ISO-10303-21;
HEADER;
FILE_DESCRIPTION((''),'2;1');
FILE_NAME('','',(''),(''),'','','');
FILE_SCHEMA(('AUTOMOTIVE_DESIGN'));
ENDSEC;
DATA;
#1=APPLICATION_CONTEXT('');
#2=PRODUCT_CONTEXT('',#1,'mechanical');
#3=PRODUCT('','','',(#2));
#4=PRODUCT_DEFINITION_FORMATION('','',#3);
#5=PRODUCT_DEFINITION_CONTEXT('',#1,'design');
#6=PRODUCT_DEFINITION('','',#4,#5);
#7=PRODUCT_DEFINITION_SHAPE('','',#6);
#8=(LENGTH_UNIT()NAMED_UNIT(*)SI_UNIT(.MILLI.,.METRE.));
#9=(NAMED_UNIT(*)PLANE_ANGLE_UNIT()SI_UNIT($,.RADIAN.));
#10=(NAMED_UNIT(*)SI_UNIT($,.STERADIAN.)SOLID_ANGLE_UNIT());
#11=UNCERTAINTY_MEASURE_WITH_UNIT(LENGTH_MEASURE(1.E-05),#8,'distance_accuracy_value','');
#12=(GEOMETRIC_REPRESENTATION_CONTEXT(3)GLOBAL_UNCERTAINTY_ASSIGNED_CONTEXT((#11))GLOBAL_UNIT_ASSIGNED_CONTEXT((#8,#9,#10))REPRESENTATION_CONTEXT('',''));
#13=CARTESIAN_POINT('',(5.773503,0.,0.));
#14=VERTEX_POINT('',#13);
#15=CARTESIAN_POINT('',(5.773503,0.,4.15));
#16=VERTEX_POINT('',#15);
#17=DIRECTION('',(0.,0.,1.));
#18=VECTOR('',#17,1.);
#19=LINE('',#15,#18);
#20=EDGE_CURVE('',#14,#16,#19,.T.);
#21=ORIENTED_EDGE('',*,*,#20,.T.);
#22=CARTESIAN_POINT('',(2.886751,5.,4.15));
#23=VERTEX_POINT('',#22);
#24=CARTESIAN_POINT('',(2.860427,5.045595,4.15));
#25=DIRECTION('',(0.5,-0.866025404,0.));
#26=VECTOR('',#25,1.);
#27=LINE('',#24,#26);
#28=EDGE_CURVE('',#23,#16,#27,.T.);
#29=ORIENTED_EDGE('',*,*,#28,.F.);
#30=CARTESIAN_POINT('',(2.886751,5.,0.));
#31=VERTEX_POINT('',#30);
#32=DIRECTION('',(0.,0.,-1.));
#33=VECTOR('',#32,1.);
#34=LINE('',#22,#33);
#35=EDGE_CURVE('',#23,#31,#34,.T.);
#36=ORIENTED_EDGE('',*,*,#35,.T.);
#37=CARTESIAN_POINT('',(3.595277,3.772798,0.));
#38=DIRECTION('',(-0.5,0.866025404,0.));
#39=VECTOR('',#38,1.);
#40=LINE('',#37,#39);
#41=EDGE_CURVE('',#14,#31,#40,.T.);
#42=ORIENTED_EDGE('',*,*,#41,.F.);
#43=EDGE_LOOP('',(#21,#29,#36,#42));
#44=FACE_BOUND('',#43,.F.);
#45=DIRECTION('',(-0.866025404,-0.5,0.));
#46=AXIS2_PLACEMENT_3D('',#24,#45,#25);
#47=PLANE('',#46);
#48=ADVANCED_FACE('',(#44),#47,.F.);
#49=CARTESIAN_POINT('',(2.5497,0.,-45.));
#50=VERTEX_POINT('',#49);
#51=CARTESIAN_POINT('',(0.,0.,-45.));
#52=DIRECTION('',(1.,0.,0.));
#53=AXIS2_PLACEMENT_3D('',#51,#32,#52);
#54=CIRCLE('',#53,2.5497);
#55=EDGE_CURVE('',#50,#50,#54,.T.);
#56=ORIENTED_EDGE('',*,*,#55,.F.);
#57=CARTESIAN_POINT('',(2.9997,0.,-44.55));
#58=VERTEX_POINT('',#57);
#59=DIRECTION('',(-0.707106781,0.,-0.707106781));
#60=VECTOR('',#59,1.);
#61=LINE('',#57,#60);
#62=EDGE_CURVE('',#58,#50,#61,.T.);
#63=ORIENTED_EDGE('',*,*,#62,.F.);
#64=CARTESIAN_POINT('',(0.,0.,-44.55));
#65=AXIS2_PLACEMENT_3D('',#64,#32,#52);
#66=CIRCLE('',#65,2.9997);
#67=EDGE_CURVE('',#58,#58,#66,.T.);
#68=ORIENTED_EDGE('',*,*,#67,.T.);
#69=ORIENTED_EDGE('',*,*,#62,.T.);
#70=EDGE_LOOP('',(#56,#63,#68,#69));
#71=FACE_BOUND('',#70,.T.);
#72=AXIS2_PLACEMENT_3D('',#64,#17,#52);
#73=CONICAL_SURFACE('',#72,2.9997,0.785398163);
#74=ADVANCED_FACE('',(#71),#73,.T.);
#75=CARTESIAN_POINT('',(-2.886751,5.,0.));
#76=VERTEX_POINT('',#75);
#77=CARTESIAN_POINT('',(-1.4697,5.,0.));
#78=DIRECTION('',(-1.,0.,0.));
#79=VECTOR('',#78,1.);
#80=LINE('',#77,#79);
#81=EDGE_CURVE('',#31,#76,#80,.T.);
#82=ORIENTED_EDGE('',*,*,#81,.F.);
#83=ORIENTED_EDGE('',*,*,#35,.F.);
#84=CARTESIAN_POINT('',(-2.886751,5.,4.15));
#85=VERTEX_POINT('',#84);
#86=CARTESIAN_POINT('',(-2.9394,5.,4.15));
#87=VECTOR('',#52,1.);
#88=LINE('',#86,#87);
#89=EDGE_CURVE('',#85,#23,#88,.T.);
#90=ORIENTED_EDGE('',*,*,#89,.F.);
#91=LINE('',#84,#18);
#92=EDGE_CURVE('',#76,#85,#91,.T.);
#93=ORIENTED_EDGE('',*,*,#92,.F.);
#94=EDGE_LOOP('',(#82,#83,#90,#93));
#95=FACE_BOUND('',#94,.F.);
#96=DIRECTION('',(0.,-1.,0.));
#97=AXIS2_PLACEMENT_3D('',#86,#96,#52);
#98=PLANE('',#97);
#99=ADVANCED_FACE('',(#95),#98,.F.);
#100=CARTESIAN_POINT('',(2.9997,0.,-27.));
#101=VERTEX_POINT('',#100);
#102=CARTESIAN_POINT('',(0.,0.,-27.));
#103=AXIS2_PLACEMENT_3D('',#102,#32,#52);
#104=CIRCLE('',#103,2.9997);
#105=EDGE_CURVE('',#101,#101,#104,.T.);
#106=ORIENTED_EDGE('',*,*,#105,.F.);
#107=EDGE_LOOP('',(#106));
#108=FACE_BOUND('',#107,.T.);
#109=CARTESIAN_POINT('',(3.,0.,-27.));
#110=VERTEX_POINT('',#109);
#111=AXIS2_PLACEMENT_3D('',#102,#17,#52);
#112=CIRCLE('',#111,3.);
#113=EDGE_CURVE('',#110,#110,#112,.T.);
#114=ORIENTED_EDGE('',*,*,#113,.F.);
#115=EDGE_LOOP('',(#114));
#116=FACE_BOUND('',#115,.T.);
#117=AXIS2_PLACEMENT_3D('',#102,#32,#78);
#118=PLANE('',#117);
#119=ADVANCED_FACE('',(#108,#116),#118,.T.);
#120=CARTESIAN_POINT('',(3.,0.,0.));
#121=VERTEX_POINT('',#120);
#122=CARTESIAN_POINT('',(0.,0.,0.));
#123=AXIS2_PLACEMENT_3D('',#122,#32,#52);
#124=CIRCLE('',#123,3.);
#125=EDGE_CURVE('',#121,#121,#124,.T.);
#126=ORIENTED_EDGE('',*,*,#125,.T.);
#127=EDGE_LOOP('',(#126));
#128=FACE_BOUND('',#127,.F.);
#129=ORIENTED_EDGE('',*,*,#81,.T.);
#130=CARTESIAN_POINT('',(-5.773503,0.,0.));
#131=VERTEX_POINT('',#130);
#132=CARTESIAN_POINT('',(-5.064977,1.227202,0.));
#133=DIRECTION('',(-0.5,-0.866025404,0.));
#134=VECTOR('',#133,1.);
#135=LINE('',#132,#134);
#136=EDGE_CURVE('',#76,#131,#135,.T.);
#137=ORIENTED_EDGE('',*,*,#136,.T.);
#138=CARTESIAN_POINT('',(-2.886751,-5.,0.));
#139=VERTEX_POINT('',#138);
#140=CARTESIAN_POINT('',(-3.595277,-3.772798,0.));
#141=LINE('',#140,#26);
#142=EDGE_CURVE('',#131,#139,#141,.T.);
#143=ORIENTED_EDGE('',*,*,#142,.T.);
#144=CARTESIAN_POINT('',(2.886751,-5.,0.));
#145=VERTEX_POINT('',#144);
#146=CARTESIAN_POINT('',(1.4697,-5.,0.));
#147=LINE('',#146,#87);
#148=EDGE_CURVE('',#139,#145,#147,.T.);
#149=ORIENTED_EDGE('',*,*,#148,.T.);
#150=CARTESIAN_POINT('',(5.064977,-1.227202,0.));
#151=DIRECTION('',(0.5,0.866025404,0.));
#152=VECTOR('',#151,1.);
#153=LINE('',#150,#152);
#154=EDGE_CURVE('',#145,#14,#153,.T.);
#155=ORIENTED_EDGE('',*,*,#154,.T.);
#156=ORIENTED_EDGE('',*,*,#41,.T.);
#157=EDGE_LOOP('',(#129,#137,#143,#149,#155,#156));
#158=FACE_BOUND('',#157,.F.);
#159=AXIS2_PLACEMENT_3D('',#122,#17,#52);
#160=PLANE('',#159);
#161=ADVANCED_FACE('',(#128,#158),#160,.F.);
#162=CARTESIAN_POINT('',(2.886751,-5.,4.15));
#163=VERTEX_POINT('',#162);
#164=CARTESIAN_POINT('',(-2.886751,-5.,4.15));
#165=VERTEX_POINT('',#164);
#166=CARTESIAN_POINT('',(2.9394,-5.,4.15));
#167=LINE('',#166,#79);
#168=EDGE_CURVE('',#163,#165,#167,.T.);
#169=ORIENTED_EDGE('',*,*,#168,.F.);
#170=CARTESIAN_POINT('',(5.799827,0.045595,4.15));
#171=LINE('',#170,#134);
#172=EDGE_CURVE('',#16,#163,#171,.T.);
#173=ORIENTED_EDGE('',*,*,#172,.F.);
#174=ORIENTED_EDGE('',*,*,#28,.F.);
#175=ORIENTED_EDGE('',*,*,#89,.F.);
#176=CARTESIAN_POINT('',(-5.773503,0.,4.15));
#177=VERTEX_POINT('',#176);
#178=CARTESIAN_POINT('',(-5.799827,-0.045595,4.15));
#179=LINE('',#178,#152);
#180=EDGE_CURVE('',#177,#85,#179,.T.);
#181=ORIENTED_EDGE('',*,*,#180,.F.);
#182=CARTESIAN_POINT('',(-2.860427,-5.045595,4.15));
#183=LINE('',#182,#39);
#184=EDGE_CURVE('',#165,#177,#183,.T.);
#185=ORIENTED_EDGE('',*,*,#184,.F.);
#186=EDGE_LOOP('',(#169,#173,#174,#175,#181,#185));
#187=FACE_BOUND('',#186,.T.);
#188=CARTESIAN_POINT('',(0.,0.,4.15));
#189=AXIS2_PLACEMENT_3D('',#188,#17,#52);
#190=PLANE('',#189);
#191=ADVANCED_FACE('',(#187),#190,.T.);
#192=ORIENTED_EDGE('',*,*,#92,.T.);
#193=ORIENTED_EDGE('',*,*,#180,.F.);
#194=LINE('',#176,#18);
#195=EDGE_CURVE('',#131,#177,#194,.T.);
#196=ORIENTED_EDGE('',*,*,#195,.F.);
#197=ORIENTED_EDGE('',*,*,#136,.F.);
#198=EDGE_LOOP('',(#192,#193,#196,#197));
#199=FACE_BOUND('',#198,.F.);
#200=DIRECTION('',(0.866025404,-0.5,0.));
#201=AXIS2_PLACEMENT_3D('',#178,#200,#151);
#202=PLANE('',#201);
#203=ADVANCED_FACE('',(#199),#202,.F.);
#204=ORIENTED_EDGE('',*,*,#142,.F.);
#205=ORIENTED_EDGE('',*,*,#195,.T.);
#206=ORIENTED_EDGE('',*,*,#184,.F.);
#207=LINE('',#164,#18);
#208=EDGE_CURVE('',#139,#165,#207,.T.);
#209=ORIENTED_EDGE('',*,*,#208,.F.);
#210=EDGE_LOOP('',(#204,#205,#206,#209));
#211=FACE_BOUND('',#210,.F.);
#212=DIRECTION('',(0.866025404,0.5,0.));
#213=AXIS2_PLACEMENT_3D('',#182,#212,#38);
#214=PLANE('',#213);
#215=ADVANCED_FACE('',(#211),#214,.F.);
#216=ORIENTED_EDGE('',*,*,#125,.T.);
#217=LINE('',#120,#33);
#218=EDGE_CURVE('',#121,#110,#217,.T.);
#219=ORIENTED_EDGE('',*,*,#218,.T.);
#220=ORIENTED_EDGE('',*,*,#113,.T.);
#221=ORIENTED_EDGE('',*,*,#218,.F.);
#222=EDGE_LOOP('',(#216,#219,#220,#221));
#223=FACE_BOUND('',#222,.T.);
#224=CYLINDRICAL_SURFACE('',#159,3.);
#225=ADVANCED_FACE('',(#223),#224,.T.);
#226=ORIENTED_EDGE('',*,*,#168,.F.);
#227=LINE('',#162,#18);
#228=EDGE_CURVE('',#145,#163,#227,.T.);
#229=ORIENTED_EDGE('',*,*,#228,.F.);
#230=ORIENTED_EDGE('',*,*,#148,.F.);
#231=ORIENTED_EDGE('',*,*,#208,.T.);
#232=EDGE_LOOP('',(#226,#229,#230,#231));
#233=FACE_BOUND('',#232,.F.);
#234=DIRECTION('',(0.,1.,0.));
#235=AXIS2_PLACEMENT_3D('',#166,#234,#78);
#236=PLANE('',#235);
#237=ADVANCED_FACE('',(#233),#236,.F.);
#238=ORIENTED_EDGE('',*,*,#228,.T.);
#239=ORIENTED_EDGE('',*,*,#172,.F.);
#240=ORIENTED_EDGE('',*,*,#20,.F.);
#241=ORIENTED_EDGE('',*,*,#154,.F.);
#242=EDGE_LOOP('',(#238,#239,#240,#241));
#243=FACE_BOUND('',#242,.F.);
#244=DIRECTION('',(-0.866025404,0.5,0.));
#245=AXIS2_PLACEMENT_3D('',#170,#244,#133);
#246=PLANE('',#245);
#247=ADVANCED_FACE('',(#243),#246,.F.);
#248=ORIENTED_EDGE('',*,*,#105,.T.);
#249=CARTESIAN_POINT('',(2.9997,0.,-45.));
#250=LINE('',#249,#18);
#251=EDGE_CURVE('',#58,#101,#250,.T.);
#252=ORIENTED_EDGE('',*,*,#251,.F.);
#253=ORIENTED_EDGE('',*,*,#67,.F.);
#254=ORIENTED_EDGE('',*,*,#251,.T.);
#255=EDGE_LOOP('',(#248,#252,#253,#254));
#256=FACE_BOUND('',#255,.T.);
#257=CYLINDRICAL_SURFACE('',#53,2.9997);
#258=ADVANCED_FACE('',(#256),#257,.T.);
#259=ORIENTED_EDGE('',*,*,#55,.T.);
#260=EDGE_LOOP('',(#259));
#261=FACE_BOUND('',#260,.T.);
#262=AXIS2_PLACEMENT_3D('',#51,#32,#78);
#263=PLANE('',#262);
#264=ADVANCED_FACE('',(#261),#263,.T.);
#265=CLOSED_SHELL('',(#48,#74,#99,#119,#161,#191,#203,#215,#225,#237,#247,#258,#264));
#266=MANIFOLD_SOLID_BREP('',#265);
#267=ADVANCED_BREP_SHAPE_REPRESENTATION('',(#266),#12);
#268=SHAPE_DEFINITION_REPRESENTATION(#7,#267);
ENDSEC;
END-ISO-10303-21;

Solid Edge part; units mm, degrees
sketch "Sketch1" plane through (0, 0, 0) normal (0, 0, 1) x (1, 0, 0)
  circle A0 centre (0, 0) radius 5.8
  dimension "D1" = 11.6
extrude "Protrusion1" add sketch "Sketch1" along normal blind 4.15
sketch "Sketch2" plane through (0, 0, 0) normal (0, 0, -1) x (1, 0, 0)
  circle A0 centre (0, 0) radius 3
extrude "Protrusion2" add sketch "Sketch2" along normal blind 45
sketch "Sketch3" plane through (0, 0, -45) normal (0, 0, -1) x (1, 0, 0)
  circle A0 centre (0, 0) radius 2.9997
extrude "Cutout1" cut sketch "Sketch3" against normal blind 18 flip side to cut
chamfer "Chamfer_1" distance 0.45 angle 45 1 edges at (-2.9997, 0, -45)
sketch "Sketch4" plane through (0, 0, 4.15) normal (0, 0, 1) x (1, 0, 0)
  line L0 (-2.9394, 5) -> (2.9394, 5)
  dimension "D1" = 10
extrude "Cutout2" cut sketch "Sketch4" against normal up to next material side at (0, 5.05, 4.15)
pattern_circular "Pattern1" count 6 over 360 about axis through (0, 0, 4.15) along (0, 0, 1) of "Cutout2"
properties part number "24104497"
